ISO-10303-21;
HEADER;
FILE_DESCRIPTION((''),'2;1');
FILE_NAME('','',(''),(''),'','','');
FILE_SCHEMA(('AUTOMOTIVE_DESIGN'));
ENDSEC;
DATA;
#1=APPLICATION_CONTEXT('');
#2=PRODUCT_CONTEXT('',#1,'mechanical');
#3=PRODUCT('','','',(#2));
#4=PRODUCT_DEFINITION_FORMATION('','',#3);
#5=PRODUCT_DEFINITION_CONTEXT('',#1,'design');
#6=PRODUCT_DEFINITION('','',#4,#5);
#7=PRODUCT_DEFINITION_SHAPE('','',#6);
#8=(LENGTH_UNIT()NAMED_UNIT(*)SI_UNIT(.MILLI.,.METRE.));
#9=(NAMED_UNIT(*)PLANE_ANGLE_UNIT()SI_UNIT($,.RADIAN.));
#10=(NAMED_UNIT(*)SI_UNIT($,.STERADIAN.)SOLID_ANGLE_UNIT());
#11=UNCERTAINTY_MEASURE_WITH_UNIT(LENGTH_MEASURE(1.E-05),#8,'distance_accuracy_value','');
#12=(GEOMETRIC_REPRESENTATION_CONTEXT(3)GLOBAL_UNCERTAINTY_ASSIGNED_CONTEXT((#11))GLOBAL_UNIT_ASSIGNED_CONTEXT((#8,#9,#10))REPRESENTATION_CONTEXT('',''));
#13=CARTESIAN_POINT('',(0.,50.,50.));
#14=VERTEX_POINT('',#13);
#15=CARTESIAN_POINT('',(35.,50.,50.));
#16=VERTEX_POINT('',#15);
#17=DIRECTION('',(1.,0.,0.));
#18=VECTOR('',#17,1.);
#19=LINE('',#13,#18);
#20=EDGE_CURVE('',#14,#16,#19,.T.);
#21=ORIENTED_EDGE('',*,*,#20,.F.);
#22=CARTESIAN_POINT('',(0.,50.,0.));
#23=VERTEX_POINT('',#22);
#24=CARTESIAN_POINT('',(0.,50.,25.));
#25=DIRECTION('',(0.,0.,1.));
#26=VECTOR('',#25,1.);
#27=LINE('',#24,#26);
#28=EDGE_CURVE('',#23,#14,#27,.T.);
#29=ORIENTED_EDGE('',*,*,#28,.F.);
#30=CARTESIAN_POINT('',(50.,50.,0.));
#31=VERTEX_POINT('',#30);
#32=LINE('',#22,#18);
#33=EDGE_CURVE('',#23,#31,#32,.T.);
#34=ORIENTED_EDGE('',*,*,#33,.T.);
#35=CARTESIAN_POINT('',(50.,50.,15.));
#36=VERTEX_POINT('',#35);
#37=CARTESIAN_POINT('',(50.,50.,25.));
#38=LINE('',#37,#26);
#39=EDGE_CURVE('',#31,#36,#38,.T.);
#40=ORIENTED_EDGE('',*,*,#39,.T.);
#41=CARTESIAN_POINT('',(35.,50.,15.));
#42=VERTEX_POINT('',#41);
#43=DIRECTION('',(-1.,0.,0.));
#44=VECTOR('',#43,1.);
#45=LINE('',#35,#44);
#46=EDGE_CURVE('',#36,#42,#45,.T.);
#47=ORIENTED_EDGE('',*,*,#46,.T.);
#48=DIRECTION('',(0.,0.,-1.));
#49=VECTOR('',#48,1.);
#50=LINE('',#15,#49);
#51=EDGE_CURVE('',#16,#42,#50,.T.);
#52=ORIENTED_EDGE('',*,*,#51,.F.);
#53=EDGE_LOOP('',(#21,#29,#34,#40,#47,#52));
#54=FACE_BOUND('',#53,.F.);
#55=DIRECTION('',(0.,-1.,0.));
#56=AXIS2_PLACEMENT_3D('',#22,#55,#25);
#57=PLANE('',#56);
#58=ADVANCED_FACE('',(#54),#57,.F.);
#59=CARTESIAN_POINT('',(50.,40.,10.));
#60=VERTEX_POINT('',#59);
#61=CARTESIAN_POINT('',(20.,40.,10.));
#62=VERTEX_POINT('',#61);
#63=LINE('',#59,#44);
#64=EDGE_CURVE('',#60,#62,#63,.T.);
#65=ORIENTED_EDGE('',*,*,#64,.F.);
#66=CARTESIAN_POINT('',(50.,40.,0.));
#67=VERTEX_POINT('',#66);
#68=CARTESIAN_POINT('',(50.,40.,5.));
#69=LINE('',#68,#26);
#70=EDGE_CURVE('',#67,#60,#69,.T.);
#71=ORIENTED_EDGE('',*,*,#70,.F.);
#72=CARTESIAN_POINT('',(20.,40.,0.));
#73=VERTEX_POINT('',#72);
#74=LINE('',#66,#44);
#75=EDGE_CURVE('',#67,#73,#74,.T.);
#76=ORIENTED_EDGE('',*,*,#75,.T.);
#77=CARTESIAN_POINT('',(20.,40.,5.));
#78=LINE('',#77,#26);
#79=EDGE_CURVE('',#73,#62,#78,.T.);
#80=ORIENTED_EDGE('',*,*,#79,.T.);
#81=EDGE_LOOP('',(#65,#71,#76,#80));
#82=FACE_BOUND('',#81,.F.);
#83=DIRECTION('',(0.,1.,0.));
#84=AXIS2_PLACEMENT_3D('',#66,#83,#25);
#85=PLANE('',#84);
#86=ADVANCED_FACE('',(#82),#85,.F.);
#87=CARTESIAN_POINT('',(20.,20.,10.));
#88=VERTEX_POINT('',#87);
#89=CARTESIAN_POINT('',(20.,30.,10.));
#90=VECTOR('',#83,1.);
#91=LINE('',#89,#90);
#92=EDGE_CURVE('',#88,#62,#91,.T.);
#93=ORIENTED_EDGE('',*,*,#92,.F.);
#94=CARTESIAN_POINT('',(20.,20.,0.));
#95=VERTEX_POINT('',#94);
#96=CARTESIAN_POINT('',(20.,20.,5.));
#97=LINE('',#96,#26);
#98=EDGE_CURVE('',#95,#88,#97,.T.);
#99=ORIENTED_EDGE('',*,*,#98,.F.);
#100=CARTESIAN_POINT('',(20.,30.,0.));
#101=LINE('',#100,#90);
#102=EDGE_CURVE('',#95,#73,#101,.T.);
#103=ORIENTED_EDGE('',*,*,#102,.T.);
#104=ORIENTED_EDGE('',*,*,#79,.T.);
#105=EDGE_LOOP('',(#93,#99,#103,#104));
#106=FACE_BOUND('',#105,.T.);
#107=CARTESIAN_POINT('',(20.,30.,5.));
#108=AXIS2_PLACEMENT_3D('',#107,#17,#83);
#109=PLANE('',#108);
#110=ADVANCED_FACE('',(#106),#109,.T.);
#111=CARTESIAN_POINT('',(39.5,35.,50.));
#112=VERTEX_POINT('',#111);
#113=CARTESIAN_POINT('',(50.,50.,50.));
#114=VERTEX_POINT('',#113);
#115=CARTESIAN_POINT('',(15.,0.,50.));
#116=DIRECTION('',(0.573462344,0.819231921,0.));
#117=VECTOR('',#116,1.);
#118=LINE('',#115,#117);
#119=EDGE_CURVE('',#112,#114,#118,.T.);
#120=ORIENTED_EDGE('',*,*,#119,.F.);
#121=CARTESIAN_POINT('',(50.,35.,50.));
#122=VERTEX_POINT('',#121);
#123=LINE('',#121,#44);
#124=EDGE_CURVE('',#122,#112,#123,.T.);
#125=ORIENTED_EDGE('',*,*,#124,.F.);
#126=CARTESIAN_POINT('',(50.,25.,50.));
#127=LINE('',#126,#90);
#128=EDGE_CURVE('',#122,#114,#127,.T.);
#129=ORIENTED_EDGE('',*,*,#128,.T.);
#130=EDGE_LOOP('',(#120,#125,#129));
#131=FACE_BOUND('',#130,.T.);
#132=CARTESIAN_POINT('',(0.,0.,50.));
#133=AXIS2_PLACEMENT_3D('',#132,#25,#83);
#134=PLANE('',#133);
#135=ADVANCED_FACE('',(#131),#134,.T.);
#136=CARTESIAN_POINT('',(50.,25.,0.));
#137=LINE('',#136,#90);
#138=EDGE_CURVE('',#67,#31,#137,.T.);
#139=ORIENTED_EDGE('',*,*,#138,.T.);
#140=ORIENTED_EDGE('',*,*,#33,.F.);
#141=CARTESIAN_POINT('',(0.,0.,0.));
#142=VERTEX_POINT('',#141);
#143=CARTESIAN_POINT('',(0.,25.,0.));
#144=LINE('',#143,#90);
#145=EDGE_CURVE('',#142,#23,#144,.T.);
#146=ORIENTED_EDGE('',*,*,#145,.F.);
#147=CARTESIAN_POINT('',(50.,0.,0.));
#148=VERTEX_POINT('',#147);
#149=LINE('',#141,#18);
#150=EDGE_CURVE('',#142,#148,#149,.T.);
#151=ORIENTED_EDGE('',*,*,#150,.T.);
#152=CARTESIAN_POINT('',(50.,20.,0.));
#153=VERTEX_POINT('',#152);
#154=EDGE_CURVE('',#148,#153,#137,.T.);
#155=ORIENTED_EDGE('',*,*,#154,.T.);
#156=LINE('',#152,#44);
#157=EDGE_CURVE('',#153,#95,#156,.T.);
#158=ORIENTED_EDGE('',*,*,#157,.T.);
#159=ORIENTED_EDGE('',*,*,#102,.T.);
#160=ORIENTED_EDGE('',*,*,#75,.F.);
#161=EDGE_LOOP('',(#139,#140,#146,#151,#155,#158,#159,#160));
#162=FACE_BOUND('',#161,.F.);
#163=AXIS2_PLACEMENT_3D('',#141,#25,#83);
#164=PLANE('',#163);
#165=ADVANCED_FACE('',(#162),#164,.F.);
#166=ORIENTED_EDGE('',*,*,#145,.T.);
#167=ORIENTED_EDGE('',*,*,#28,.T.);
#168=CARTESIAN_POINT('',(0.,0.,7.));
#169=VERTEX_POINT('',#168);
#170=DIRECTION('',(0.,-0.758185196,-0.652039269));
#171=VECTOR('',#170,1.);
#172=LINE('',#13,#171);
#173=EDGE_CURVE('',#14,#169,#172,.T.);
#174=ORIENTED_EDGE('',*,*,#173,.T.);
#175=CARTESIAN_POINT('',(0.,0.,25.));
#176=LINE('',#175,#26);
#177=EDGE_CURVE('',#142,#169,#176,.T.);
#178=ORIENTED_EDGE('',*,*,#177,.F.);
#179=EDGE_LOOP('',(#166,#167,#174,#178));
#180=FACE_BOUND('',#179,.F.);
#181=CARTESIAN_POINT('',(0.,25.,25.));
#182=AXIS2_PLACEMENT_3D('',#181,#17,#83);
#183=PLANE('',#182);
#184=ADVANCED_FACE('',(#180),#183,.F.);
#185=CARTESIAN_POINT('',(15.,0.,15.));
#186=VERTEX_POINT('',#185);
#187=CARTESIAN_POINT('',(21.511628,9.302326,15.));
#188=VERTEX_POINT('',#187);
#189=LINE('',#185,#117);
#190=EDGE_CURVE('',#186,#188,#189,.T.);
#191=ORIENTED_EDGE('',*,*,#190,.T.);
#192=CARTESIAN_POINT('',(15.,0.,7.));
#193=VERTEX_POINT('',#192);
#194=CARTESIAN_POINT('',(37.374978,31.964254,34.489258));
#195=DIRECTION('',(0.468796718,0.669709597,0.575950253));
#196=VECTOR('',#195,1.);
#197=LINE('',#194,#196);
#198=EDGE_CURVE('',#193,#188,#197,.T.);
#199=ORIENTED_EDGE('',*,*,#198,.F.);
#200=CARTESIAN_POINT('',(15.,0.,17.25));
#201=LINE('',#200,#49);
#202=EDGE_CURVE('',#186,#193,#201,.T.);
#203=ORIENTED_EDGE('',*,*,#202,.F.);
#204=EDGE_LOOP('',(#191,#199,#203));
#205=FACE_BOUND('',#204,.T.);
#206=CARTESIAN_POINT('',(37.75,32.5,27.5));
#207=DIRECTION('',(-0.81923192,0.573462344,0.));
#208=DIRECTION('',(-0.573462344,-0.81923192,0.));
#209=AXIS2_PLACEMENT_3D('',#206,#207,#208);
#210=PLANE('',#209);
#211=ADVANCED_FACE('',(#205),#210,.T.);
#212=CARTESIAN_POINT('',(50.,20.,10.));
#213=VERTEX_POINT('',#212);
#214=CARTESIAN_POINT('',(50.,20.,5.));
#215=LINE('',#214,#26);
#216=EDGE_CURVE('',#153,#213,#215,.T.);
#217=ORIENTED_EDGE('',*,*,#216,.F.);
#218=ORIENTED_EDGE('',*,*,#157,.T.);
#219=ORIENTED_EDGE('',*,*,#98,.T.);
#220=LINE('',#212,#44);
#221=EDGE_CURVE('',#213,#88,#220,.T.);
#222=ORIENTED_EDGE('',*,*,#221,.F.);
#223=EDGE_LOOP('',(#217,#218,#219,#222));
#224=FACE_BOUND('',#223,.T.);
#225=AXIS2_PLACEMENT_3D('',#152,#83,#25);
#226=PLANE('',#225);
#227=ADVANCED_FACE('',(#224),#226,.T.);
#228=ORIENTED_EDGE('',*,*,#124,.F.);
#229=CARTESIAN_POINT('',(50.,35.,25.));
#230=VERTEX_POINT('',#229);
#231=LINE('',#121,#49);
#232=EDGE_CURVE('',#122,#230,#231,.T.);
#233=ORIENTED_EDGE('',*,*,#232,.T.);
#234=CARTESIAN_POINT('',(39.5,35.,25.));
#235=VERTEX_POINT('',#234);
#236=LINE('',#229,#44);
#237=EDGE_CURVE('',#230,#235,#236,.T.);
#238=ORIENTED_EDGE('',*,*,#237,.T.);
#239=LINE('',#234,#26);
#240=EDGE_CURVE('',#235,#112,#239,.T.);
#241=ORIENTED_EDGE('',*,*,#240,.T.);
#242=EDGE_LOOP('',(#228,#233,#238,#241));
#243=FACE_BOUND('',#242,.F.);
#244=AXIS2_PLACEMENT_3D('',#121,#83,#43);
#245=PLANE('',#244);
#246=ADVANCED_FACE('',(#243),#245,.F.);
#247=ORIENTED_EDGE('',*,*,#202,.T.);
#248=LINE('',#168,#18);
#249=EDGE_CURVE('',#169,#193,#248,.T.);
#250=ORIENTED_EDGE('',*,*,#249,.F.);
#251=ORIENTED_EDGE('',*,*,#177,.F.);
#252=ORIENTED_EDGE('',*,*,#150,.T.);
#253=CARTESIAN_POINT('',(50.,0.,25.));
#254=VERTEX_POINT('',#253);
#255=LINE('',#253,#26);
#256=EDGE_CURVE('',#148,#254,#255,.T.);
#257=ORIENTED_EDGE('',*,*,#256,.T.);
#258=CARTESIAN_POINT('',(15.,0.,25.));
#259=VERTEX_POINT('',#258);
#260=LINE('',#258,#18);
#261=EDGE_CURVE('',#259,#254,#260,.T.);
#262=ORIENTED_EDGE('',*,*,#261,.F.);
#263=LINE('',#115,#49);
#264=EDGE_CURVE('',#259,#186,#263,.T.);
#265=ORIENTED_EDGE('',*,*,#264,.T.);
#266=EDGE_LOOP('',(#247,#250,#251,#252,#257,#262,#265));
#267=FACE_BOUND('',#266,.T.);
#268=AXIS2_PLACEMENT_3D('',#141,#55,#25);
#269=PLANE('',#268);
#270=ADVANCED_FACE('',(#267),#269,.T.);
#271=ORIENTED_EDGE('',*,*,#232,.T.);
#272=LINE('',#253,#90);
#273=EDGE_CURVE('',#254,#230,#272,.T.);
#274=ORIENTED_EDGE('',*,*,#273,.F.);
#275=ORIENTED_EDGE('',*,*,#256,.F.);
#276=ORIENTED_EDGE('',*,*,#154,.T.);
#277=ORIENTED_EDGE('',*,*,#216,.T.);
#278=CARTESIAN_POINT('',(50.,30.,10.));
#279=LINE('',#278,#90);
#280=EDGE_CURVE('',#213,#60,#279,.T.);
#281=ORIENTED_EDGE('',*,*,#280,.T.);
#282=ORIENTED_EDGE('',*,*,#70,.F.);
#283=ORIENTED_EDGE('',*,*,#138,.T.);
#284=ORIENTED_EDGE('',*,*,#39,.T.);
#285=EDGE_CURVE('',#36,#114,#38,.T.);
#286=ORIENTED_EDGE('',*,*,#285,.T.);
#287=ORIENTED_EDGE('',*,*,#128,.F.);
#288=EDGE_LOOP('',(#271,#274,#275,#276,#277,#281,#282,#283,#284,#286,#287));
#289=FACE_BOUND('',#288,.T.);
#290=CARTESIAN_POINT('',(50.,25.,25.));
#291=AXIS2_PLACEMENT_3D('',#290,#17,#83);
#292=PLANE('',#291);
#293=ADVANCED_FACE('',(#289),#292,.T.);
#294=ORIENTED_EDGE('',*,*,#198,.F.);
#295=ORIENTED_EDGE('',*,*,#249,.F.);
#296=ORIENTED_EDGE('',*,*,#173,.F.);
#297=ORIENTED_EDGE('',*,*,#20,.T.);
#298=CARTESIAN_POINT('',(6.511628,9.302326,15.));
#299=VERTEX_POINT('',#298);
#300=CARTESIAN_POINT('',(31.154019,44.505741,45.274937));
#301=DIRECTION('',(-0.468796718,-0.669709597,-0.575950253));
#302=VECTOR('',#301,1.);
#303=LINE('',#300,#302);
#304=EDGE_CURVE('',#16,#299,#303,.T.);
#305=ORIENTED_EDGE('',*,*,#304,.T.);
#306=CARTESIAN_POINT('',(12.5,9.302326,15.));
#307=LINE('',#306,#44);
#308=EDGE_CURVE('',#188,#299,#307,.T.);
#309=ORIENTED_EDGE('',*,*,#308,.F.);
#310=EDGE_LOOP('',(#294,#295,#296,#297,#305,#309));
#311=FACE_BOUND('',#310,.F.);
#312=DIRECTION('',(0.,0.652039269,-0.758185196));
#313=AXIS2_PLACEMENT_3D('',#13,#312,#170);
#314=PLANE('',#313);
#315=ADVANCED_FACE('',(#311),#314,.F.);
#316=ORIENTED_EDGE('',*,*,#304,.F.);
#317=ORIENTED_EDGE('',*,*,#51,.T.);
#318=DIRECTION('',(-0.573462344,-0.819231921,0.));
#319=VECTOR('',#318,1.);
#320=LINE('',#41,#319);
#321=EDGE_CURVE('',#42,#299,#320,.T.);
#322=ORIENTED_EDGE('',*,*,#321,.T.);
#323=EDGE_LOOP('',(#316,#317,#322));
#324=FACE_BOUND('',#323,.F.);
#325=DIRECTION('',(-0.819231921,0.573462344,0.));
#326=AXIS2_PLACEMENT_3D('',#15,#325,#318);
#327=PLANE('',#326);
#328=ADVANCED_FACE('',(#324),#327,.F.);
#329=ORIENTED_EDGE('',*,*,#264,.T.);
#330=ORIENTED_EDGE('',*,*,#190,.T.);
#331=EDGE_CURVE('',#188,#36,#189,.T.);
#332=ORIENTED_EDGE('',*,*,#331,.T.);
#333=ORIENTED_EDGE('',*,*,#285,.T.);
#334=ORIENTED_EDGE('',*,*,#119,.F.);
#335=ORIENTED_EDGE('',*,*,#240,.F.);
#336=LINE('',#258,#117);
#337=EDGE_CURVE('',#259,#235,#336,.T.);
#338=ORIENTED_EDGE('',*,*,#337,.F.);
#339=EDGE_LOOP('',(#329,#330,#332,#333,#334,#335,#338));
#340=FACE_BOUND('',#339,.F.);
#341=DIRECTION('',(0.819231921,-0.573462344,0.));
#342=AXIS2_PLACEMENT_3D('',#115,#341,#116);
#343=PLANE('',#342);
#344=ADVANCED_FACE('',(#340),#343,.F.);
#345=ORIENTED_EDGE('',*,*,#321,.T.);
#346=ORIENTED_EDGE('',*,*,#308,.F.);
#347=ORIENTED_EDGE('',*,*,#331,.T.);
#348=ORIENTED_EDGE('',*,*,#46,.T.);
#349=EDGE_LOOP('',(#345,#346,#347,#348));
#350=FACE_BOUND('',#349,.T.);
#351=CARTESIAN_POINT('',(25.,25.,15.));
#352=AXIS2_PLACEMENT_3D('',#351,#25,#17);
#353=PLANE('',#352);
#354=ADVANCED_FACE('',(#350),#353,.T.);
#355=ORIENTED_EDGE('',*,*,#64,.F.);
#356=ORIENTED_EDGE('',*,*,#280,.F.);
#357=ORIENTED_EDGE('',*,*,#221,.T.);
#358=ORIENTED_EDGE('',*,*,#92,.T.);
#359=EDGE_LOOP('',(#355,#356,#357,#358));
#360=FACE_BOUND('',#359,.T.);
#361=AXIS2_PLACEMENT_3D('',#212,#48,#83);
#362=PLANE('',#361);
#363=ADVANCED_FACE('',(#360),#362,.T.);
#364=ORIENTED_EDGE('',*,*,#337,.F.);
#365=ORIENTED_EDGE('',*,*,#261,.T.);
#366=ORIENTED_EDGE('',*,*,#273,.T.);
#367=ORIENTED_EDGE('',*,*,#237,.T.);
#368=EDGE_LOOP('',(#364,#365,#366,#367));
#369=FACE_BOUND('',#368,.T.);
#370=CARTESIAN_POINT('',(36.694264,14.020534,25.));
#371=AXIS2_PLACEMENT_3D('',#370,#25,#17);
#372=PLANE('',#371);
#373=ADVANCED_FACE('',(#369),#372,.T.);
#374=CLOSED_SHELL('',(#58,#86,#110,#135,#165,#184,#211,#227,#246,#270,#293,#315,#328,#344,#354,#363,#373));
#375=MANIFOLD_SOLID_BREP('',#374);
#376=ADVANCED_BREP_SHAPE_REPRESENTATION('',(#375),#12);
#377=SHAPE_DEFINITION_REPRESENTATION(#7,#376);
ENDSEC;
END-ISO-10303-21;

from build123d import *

# Parameters (mm, degrees)
F0_W     = 50
F0_H     = 50
F1_DEPTH = 50
F3_DEPTH = 35
F5_DEPTH = 25
F7_REACH = 115.9479483752
F8_W     = 20
F8_H     = 10
F9_DEPTH = 30


with BuildPart() as f1:
    # F0 (on Right) → F1 (new body)
    with BuildSketch(Plane.YZ):
        with Locations((25, 25)):
            Rectangle(F0_W, F0_H)
    extrude(amount=F1_DEPTH)

    # F2 (on face) → F3 (cut)
    with BuildSketch(Plane.XY.offset(50)):
        Polygon((0, 0), (15, 0), (50, 50), (35, 50), align=None)
    extrude(amount=-F3_DEPTH, mode=Mode.SUBTRACT)

    # F4 (on face) → F5 (cut)
    with BuildSketch(Plane.XY.offset(50)):
        Polygon((15, 0), (50, 0), (50, 35), (39.5, 35), align=None)
    extrude(amount=-F5_DEPTH, mode=Mode.SUBTRACT)

    f7_end = Plane(origin=(37.75, 32.5, 27.5), x_dir=(-0.5734623444, -0.8192319205, 0), z_dir=(-0.8192319205, 0.5734623444, 0))
    # F6 (on face) → F7 (cut, up to a plane its end follows)
    with BuildSketch(Plane(origin=(0, 0, 0), x_dir=(0, -1, 0), z_dir=(-1, 0, 0))):
        Polygon((-50, 50), (0, 7), (0, 15), (0, 50), align=None)
    f7_long = extrude(amount=-F7_REACH, mode=Mode.PRIVATE)
    add(split(f7_long, bisect_by=f7_end, keep=Keep.TOP, mode=Mode.PRIVATE), mode=Mode.SUBTRACT)

    # F8 (on face) → F9 (cut)
    with BuildSketch(Plane.YZ.offset(50)):
        with Locations((30, 5)):
            Rectangle(F8_W, F8_H)
    extrude(amount=-F9_DEPTH, mode=Mode.SUBTRACT)


solid = f1.part
